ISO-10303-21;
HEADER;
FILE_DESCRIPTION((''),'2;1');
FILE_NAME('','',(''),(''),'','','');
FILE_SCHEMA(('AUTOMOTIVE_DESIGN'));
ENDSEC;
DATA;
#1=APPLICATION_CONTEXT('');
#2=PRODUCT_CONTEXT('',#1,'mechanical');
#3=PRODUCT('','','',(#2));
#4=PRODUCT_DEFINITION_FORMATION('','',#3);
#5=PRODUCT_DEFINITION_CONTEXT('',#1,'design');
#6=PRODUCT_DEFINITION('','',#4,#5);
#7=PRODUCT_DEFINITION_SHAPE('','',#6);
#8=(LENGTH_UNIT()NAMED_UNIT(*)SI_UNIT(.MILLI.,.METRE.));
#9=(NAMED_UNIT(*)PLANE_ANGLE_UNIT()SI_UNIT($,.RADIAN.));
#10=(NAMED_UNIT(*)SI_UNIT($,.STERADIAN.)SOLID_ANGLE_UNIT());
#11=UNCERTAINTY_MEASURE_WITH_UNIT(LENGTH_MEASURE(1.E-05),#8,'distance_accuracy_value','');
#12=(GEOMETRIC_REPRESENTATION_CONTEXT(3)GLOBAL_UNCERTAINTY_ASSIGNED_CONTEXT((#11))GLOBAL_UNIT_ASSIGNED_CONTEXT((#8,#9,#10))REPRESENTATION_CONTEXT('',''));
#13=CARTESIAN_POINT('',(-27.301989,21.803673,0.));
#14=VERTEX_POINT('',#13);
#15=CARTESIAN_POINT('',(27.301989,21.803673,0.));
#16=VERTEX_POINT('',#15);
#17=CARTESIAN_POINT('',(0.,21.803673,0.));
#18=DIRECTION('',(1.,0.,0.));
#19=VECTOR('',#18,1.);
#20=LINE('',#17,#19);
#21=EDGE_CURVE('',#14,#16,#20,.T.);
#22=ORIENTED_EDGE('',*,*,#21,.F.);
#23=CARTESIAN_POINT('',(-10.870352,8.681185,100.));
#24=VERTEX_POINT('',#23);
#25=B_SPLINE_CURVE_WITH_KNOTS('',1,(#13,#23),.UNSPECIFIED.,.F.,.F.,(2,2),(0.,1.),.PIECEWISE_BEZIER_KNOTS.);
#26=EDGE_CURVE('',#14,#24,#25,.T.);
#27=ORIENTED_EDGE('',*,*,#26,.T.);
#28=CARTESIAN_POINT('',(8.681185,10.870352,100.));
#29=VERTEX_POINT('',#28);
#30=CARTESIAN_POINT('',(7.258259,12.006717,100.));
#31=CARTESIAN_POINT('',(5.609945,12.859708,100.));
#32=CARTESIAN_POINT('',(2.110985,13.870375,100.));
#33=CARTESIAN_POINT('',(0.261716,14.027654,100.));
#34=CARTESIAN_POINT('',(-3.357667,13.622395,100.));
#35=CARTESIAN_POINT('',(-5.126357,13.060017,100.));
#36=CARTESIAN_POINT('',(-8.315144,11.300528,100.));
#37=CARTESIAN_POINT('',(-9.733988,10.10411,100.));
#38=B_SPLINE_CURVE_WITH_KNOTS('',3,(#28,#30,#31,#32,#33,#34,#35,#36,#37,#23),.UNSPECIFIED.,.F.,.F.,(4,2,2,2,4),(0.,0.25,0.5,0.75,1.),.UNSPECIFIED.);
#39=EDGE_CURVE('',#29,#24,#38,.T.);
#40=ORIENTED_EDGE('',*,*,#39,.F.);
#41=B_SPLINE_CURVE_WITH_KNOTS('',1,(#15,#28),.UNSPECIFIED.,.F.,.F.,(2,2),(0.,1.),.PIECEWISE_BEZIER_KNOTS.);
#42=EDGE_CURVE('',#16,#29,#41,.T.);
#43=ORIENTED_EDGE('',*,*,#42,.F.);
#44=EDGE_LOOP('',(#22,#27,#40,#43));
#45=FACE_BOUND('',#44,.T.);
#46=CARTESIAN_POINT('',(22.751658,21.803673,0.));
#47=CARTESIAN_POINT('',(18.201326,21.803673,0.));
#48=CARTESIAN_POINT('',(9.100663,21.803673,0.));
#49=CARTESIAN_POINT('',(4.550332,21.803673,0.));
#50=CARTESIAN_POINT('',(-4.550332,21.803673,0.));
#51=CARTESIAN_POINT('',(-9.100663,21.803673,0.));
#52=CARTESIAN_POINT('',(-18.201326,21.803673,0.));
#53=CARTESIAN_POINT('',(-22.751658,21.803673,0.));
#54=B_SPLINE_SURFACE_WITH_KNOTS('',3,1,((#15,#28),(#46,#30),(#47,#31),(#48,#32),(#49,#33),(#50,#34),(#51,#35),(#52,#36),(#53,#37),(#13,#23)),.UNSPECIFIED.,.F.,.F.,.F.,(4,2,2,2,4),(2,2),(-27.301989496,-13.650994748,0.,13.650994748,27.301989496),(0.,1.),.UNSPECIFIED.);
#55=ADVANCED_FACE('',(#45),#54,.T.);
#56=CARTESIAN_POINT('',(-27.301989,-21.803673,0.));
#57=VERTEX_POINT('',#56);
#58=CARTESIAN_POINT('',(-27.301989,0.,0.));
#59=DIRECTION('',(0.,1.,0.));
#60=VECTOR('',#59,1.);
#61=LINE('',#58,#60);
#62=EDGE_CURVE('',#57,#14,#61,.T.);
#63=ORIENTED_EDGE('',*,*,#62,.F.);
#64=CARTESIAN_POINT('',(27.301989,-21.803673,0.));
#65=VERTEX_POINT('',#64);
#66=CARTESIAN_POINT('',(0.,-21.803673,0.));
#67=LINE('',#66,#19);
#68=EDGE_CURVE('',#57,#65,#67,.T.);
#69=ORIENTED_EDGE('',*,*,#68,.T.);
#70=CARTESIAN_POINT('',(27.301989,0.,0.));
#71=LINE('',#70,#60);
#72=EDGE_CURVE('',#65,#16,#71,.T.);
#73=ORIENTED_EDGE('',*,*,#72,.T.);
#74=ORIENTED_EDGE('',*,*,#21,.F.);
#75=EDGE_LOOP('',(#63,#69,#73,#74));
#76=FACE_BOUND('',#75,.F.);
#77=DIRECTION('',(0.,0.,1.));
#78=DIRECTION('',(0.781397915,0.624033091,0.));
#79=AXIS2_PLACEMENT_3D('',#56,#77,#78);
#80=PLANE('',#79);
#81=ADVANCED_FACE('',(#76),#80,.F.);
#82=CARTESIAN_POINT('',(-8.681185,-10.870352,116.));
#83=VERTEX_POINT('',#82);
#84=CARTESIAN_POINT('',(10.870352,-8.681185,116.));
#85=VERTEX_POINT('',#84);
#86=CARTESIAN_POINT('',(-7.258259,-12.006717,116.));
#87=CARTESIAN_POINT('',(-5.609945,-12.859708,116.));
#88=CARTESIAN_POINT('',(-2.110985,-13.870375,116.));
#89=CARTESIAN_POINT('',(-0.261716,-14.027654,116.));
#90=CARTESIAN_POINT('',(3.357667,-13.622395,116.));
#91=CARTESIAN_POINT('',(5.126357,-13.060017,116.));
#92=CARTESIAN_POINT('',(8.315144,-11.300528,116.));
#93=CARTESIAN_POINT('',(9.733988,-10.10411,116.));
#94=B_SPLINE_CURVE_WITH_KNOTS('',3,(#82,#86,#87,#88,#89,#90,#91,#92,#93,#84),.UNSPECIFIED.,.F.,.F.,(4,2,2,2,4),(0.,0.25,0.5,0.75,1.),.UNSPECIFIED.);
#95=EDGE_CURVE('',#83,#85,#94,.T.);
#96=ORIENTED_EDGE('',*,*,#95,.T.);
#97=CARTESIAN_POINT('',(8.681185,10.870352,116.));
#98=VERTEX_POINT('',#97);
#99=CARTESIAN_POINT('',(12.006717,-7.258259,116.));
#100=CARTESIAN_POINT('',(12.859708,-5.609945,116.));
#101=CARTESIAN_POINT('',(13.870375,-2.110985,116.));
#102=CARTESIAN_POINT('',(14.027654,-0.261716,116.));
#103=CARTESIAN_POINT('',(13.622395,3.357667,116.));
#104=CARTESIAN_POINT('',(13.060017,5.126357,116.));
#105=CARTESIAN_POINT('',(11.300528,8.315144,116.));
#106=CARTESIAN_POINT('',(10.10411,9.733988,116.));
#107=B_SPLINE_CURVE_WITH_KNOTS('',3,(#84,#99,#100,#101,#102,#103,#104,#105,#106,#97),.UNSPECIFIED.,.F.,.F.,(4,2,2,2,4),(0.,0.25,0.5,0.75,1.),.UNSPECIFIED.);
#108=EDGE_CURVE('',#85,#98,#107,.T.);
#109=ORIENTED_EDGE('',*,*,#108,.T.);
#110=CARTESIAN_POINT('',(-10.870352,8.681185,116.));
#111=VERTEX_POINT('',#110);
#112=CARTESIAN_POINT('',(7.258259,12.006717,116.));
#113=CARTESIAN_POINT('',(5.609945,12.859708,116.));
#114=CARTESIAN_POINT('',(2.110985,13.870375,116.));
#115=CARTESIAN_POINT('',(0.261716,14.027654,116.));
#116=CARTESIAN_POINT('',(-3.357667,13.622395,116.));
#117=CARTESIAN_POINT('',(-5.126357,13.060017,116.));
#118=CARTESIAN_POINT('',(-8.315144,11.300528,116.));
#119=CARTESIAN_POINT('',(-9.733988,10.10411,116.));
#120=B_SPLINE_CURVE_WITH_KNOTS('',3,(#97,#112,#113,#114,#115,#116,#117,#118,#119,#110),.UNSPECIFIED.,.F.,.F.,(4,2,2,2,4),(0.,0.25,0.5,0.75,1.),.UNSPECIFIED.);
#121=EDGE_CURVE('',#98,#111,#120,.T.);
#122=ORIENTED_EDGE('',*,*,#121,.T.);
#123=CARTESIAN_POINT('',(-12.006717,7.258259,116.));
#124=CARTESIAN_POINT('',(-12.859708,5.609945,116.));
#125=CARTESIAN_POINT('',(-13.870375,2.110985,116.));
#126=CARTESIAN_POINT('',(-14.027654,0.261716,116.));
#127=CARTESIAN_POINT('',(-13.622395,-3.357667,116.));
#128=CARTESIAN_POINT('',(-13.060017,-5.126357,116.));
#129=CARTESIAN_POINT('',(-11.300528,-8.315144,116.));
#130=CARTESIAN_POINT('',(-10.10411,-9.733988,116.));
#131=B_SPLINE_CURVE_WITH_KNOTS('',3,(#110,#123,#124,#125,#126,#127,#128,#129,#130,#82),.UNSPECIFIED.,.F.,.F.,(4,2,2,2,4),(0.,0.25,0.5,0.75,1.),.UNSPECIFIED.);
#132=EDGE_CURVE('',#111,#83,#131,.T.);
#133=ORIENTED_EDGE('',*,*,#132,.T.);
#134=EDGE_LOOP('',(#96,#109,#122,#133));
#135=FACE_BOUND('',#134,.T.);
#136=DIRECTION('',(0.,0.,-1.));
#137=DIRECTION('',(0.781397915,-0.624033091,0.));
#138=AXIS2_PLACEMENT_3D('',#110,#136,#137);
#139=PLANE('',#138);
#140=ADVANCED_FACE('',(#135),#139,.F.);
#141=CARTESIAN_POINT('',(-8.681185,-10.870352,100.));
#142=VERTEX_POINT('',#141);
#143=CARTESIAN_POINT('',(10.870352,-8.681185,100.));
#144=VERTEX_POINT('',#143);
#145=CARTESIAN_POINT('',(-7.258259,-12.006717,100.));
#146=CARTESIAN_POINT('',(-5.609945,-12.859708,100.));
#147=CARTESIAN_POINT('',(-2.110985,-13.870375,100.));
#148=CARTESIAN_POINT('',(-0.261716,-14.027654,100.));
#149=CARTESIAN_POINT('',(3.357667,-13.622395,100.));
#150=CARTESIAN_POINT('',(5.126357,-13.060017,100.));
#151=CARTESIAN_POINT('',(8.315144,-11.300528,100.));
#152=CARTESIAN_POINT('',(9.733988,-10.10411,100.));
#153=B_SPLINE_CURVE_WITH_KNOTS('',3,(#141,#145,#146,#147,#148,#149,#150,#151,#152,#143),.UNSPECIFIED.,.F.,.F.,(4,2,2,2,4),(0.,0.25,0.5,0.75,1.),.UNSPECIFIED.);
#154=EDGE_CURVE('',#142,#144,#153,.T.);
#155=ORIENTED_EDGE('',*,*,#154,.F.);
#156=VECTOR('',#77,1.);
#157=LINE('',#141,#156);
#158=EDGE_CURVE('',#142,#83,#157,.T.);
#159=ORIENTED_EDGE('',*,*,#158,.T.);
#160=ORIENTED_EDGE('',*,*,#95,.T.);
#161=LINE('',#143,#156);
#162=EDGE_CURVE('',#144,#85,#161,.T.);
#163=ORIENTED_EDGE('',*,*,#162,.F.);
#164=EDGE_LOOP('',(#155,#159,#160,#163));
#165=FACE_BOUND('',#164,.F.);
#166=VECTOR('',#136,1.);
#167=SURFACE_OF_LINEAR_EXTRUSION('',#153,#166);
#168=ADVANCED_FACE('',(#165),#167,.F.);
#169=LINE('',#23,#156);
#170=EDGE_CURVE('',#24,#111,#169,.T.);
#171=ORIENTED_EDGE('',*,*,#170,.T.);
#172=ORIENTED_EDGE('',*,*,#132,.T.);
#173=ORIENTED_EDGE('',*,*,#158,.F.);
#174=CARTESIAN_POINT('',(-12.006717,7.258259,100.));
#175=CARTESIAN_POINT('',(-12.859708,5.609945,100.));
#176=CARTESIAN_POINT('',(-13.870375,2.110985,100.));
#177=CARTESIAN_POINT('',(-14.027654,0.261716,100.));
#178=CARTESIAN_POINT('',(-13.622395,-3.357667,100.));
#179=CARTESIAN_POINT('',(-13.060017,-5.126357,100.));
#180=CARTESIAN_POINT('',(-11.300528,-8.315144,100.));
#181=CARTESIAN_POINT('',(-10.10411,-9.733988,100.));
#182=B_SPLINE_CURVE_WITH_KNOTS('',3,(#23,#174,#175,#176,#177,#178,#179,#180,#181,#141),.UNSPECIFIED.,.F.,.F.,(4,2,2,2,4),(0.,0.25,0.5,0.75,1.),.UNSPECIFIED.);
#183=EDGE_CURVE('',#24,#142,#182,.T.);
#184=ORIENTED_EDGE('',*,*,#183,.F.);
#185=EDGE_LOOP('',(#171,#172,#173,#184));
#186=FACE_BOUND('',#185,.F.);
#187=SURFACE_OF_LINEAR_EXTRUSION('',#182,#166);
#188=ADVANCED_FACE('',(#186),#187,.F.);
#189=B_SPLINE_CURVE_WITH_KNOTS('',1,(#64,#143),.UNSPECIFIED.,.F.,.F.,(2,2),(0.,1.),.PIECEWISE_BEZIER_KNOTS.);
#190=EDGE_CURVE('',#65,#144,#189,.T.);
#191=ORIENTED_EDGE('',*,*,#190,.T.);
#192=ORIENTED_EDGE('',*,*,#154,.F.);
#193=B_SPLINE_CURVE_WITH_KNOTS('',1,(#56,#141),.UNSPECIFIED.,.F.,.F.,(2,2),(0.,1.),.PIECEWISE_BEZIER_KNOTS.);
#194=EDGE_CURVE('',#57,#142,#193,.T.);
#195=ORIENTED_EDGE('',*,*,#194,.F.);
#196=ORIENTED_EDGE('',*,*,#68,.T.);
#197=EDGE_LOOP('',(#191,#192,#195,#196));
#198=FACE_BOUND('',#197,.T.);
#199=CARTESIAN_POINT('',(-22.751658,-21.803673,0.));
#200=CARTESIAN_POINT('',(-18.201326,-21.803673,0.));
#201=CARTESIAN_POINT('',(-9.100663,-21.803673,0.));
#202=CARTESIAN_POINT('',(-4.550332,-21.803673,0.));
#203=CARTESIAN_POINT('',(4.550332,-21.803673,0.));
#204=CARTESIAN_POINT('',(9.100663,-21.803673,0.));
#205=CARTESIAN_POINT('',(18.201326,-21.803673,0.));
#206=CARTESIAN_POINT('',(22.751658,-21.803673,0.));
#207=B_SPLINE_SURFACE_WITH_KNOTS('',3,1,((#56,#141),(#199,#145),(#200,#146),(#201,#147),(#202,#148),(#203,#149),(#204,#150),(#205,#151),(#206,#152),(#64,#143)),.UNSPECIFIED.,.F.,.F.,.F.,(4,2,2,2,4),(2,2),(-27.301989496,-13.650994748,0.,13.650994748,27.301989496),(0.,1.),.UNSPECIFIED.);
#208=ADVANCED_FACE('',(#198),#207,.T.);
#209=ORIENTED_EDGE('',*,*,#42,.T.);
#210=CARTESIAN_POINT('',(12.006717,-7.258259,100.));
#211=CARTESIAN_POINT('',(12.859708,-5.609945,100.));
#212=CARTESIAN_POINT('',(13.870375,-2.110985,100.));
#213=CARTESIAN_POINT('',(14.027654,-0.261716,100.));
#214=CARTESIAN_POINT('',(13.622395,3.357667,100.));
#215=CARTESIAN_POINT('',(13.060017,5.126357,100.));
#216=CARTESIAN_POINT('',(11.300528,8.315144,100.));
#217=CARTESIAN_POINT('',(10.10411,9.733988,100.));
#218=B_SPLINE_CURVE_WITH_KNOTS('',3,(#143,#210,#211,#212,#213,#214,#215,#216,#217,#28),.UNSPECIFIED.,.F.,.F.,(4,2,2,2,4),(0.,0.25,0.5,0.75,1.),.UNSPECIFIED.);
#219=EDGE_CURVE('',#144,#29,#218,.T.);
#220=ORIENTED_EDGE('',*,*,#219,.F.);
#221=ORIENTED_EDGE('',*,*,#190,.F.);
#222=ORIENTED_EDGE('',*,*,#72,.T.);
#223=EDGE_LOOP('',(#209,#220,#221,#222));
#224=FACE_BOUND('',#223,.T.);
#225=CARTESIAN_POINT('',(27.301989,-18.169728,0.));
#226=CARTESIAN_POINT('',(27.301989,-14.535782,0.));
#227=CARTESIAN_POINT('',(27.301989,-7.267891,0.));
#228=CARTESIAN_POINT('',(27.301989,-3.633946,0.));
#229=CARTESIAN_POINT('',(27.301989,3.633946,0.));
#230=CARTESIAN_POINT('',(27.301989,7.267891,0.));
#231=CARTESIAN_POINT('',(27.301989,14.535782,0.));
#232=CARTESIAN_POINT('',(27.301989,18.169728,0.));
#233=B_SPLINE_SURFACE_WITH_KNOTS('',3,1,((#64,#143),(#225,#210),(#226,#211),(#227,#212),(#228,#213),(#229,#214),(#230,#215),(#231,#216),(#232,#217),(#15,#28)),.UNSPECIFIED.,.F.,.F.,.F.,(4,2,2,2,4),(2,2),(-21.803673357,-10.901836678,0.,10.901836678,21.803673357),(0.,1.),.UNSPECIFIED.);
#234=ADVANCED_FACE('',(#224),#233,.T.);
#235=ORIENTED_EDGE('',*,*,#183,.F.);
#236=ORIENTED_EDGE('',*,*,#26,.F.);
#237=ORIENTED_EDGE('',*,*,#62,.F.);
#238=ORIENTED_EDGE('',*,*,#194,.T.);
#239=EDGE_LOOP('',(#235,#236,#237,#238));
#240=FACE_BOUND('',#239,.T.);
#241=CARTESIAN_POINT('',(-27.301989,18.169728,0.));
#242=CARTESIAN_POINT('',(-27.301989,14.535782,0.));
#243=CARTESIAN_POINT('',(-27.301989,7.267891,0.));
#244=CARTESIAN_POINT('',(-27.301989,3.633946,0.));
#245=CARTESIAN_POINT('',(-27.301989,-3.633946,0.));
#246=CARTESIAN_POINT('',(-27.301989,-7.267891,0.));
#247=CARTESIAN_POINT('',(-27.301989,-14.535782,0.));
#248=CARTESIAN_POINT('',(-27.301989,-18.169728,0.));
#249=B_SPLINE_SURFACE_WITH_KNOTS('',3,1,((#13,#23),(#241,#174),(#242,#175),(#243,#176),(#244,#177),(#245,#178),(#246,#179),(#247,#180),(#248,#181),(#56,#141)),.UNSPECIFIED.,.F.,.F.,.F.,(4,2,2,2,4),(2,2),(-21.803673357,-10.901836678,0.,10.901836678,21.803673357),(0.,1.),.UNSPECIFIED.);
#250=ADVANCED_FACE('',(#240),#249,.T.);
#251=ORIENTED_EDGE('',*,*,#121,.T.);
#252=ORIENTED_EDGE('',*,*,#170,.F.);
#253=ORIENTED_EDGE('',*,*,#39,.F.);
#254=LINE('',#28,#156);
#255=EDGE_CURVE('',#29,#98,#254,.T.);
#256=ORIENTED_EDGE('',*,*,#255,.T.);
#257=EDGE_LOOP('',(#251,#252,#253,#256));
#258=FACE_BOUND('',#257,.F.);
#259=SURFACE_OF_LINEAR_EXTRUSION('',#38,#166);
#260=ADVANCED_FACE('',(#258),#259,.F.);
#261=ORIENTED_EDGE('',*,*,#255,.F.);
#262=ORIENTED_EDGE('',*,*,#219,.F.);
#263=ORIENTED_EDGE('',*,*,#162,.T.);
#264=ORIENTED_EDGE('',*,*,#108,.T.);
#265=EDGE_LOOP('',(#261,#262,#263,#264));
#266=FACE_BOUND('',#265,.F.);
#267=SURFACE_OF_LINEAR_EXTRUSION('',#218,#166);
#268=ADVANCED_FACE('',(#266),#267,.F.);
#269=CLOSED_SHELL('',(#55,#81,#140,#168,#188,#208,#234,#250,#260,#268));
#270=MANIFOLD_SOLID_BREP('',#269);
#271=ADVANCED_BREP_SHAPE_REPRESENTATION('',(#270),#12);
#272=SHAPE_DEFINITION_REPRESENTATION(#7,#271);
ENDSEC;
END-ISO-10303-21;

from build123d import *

# Parameters (mm, degrees)
F0_W     = 54.6039789915
F0_H     = 43.6073467135
F5_DEPTH = 16


# Not quite as in the source:
# - the arcs of a loft's sections are written as splines that run evenly, so that the points pair up as in the source's solid


with BuildPart() as f4:
    # F0 (on Top) → F4 section 0
    with BuildSketch(Plane.XY):
        Rectangle(F0_W, F0_H)
    # F3 (on offset) → F4 section 1
    with BuildSketch(Plane.XY.offset(100)):
        with BuildLine():
            add(Edge.make_bspline(
                [(10.8703523008, -8.681184603), (12.0067167081, -7.2582588142), (12.8597078303, -5.6099448874), (13.8703752153, -2.1109851988), (14.0276538234, -0.2617161283), (13.6223948312, 3.3576667769), (13.0600166829, 5.1263565389), (11.3005283214, 8.3151444232), (10.1041103917, 9.7339878936), (8.681184603, 10.8703523008)],
                knots=[0, 0, 0, 0, 0.25, 0.25, 0.5, 0.5, 0.75, 0.75, 1, 1, 1, 1], degree=3))
            add(Edge.make_bspline(
                [(8.681184603, 10.8703523008), (7.2582588142, 12.0067167081), (5.6099448874, 12.8597078303), (2.1109851988, 13.8703752153), (0.2617161283, 14.0276538234), (-3.3576667769, 13.6223948312), (-5.1263565389, 13.0600166829), (-8.3151444232, 11.3005283214), (-9.7339878936, 10.1041103917), (-10.8703523008, 8.681184603)],
                knots=[0, 0, 0, 0, 0.25, 0.25, 0.5, 0.5, 0.75, 0.75, 1, 1, 1, 1], degree=3))
            add(Edge.make_bspline(
                [(-10.8703523008, 8.681184603), (-12.0067167081, 7.2582588142), (-12.8597078303, 5.6099448874), (-13.8703752153, 2.1109851988), (-14.0276538234, 0.2617161283), (-13.6223948312, -3.3576667769), (-13.0600166829, -5.1263565389), (-11.3005283214, -8.3151444232), (-10.1041103917, -9.7339878936), (-8.681184603, -10.8703523008)],
                knots=[0, 0, 0, 0, 0.25, 0.25, 0.5, 0.5, 0.75, 0.75, 1, 1, 1, 1], degree=3))
            add(Edge.make_bspline(
                [(-8.681184603, -10.8703523008), (-7.2582588142, -12.0067167081), (-5.6099448874, -12.8597078303), (-2.1109851988, -13.8703752153), (-0.2617161283, -14.0276538234), (3.3576667769, -13.6223948312), (5.1263565389, -13.0600166829), (8.3151444232, -11.3005283214), (9.7339878936, -10.1041103917), (10.8703523008, -8.681184603)],
                knots=[0, 0, 0, 0, 0.25, 0.25, 0.5, 0.5, 0.75, 0.75, 1, 1, 1, 1], degree=3))
        make_face()
    loft(ruled=True)

    # F5 (add): a face of the model
    f5_faces = [f4.faces().sort_by_distance(p)[0] for p in [
        (0, 0, 100),
    ]]
    extrude(f5_faces, amount=F5_DEPTH)


solid = f4.part
